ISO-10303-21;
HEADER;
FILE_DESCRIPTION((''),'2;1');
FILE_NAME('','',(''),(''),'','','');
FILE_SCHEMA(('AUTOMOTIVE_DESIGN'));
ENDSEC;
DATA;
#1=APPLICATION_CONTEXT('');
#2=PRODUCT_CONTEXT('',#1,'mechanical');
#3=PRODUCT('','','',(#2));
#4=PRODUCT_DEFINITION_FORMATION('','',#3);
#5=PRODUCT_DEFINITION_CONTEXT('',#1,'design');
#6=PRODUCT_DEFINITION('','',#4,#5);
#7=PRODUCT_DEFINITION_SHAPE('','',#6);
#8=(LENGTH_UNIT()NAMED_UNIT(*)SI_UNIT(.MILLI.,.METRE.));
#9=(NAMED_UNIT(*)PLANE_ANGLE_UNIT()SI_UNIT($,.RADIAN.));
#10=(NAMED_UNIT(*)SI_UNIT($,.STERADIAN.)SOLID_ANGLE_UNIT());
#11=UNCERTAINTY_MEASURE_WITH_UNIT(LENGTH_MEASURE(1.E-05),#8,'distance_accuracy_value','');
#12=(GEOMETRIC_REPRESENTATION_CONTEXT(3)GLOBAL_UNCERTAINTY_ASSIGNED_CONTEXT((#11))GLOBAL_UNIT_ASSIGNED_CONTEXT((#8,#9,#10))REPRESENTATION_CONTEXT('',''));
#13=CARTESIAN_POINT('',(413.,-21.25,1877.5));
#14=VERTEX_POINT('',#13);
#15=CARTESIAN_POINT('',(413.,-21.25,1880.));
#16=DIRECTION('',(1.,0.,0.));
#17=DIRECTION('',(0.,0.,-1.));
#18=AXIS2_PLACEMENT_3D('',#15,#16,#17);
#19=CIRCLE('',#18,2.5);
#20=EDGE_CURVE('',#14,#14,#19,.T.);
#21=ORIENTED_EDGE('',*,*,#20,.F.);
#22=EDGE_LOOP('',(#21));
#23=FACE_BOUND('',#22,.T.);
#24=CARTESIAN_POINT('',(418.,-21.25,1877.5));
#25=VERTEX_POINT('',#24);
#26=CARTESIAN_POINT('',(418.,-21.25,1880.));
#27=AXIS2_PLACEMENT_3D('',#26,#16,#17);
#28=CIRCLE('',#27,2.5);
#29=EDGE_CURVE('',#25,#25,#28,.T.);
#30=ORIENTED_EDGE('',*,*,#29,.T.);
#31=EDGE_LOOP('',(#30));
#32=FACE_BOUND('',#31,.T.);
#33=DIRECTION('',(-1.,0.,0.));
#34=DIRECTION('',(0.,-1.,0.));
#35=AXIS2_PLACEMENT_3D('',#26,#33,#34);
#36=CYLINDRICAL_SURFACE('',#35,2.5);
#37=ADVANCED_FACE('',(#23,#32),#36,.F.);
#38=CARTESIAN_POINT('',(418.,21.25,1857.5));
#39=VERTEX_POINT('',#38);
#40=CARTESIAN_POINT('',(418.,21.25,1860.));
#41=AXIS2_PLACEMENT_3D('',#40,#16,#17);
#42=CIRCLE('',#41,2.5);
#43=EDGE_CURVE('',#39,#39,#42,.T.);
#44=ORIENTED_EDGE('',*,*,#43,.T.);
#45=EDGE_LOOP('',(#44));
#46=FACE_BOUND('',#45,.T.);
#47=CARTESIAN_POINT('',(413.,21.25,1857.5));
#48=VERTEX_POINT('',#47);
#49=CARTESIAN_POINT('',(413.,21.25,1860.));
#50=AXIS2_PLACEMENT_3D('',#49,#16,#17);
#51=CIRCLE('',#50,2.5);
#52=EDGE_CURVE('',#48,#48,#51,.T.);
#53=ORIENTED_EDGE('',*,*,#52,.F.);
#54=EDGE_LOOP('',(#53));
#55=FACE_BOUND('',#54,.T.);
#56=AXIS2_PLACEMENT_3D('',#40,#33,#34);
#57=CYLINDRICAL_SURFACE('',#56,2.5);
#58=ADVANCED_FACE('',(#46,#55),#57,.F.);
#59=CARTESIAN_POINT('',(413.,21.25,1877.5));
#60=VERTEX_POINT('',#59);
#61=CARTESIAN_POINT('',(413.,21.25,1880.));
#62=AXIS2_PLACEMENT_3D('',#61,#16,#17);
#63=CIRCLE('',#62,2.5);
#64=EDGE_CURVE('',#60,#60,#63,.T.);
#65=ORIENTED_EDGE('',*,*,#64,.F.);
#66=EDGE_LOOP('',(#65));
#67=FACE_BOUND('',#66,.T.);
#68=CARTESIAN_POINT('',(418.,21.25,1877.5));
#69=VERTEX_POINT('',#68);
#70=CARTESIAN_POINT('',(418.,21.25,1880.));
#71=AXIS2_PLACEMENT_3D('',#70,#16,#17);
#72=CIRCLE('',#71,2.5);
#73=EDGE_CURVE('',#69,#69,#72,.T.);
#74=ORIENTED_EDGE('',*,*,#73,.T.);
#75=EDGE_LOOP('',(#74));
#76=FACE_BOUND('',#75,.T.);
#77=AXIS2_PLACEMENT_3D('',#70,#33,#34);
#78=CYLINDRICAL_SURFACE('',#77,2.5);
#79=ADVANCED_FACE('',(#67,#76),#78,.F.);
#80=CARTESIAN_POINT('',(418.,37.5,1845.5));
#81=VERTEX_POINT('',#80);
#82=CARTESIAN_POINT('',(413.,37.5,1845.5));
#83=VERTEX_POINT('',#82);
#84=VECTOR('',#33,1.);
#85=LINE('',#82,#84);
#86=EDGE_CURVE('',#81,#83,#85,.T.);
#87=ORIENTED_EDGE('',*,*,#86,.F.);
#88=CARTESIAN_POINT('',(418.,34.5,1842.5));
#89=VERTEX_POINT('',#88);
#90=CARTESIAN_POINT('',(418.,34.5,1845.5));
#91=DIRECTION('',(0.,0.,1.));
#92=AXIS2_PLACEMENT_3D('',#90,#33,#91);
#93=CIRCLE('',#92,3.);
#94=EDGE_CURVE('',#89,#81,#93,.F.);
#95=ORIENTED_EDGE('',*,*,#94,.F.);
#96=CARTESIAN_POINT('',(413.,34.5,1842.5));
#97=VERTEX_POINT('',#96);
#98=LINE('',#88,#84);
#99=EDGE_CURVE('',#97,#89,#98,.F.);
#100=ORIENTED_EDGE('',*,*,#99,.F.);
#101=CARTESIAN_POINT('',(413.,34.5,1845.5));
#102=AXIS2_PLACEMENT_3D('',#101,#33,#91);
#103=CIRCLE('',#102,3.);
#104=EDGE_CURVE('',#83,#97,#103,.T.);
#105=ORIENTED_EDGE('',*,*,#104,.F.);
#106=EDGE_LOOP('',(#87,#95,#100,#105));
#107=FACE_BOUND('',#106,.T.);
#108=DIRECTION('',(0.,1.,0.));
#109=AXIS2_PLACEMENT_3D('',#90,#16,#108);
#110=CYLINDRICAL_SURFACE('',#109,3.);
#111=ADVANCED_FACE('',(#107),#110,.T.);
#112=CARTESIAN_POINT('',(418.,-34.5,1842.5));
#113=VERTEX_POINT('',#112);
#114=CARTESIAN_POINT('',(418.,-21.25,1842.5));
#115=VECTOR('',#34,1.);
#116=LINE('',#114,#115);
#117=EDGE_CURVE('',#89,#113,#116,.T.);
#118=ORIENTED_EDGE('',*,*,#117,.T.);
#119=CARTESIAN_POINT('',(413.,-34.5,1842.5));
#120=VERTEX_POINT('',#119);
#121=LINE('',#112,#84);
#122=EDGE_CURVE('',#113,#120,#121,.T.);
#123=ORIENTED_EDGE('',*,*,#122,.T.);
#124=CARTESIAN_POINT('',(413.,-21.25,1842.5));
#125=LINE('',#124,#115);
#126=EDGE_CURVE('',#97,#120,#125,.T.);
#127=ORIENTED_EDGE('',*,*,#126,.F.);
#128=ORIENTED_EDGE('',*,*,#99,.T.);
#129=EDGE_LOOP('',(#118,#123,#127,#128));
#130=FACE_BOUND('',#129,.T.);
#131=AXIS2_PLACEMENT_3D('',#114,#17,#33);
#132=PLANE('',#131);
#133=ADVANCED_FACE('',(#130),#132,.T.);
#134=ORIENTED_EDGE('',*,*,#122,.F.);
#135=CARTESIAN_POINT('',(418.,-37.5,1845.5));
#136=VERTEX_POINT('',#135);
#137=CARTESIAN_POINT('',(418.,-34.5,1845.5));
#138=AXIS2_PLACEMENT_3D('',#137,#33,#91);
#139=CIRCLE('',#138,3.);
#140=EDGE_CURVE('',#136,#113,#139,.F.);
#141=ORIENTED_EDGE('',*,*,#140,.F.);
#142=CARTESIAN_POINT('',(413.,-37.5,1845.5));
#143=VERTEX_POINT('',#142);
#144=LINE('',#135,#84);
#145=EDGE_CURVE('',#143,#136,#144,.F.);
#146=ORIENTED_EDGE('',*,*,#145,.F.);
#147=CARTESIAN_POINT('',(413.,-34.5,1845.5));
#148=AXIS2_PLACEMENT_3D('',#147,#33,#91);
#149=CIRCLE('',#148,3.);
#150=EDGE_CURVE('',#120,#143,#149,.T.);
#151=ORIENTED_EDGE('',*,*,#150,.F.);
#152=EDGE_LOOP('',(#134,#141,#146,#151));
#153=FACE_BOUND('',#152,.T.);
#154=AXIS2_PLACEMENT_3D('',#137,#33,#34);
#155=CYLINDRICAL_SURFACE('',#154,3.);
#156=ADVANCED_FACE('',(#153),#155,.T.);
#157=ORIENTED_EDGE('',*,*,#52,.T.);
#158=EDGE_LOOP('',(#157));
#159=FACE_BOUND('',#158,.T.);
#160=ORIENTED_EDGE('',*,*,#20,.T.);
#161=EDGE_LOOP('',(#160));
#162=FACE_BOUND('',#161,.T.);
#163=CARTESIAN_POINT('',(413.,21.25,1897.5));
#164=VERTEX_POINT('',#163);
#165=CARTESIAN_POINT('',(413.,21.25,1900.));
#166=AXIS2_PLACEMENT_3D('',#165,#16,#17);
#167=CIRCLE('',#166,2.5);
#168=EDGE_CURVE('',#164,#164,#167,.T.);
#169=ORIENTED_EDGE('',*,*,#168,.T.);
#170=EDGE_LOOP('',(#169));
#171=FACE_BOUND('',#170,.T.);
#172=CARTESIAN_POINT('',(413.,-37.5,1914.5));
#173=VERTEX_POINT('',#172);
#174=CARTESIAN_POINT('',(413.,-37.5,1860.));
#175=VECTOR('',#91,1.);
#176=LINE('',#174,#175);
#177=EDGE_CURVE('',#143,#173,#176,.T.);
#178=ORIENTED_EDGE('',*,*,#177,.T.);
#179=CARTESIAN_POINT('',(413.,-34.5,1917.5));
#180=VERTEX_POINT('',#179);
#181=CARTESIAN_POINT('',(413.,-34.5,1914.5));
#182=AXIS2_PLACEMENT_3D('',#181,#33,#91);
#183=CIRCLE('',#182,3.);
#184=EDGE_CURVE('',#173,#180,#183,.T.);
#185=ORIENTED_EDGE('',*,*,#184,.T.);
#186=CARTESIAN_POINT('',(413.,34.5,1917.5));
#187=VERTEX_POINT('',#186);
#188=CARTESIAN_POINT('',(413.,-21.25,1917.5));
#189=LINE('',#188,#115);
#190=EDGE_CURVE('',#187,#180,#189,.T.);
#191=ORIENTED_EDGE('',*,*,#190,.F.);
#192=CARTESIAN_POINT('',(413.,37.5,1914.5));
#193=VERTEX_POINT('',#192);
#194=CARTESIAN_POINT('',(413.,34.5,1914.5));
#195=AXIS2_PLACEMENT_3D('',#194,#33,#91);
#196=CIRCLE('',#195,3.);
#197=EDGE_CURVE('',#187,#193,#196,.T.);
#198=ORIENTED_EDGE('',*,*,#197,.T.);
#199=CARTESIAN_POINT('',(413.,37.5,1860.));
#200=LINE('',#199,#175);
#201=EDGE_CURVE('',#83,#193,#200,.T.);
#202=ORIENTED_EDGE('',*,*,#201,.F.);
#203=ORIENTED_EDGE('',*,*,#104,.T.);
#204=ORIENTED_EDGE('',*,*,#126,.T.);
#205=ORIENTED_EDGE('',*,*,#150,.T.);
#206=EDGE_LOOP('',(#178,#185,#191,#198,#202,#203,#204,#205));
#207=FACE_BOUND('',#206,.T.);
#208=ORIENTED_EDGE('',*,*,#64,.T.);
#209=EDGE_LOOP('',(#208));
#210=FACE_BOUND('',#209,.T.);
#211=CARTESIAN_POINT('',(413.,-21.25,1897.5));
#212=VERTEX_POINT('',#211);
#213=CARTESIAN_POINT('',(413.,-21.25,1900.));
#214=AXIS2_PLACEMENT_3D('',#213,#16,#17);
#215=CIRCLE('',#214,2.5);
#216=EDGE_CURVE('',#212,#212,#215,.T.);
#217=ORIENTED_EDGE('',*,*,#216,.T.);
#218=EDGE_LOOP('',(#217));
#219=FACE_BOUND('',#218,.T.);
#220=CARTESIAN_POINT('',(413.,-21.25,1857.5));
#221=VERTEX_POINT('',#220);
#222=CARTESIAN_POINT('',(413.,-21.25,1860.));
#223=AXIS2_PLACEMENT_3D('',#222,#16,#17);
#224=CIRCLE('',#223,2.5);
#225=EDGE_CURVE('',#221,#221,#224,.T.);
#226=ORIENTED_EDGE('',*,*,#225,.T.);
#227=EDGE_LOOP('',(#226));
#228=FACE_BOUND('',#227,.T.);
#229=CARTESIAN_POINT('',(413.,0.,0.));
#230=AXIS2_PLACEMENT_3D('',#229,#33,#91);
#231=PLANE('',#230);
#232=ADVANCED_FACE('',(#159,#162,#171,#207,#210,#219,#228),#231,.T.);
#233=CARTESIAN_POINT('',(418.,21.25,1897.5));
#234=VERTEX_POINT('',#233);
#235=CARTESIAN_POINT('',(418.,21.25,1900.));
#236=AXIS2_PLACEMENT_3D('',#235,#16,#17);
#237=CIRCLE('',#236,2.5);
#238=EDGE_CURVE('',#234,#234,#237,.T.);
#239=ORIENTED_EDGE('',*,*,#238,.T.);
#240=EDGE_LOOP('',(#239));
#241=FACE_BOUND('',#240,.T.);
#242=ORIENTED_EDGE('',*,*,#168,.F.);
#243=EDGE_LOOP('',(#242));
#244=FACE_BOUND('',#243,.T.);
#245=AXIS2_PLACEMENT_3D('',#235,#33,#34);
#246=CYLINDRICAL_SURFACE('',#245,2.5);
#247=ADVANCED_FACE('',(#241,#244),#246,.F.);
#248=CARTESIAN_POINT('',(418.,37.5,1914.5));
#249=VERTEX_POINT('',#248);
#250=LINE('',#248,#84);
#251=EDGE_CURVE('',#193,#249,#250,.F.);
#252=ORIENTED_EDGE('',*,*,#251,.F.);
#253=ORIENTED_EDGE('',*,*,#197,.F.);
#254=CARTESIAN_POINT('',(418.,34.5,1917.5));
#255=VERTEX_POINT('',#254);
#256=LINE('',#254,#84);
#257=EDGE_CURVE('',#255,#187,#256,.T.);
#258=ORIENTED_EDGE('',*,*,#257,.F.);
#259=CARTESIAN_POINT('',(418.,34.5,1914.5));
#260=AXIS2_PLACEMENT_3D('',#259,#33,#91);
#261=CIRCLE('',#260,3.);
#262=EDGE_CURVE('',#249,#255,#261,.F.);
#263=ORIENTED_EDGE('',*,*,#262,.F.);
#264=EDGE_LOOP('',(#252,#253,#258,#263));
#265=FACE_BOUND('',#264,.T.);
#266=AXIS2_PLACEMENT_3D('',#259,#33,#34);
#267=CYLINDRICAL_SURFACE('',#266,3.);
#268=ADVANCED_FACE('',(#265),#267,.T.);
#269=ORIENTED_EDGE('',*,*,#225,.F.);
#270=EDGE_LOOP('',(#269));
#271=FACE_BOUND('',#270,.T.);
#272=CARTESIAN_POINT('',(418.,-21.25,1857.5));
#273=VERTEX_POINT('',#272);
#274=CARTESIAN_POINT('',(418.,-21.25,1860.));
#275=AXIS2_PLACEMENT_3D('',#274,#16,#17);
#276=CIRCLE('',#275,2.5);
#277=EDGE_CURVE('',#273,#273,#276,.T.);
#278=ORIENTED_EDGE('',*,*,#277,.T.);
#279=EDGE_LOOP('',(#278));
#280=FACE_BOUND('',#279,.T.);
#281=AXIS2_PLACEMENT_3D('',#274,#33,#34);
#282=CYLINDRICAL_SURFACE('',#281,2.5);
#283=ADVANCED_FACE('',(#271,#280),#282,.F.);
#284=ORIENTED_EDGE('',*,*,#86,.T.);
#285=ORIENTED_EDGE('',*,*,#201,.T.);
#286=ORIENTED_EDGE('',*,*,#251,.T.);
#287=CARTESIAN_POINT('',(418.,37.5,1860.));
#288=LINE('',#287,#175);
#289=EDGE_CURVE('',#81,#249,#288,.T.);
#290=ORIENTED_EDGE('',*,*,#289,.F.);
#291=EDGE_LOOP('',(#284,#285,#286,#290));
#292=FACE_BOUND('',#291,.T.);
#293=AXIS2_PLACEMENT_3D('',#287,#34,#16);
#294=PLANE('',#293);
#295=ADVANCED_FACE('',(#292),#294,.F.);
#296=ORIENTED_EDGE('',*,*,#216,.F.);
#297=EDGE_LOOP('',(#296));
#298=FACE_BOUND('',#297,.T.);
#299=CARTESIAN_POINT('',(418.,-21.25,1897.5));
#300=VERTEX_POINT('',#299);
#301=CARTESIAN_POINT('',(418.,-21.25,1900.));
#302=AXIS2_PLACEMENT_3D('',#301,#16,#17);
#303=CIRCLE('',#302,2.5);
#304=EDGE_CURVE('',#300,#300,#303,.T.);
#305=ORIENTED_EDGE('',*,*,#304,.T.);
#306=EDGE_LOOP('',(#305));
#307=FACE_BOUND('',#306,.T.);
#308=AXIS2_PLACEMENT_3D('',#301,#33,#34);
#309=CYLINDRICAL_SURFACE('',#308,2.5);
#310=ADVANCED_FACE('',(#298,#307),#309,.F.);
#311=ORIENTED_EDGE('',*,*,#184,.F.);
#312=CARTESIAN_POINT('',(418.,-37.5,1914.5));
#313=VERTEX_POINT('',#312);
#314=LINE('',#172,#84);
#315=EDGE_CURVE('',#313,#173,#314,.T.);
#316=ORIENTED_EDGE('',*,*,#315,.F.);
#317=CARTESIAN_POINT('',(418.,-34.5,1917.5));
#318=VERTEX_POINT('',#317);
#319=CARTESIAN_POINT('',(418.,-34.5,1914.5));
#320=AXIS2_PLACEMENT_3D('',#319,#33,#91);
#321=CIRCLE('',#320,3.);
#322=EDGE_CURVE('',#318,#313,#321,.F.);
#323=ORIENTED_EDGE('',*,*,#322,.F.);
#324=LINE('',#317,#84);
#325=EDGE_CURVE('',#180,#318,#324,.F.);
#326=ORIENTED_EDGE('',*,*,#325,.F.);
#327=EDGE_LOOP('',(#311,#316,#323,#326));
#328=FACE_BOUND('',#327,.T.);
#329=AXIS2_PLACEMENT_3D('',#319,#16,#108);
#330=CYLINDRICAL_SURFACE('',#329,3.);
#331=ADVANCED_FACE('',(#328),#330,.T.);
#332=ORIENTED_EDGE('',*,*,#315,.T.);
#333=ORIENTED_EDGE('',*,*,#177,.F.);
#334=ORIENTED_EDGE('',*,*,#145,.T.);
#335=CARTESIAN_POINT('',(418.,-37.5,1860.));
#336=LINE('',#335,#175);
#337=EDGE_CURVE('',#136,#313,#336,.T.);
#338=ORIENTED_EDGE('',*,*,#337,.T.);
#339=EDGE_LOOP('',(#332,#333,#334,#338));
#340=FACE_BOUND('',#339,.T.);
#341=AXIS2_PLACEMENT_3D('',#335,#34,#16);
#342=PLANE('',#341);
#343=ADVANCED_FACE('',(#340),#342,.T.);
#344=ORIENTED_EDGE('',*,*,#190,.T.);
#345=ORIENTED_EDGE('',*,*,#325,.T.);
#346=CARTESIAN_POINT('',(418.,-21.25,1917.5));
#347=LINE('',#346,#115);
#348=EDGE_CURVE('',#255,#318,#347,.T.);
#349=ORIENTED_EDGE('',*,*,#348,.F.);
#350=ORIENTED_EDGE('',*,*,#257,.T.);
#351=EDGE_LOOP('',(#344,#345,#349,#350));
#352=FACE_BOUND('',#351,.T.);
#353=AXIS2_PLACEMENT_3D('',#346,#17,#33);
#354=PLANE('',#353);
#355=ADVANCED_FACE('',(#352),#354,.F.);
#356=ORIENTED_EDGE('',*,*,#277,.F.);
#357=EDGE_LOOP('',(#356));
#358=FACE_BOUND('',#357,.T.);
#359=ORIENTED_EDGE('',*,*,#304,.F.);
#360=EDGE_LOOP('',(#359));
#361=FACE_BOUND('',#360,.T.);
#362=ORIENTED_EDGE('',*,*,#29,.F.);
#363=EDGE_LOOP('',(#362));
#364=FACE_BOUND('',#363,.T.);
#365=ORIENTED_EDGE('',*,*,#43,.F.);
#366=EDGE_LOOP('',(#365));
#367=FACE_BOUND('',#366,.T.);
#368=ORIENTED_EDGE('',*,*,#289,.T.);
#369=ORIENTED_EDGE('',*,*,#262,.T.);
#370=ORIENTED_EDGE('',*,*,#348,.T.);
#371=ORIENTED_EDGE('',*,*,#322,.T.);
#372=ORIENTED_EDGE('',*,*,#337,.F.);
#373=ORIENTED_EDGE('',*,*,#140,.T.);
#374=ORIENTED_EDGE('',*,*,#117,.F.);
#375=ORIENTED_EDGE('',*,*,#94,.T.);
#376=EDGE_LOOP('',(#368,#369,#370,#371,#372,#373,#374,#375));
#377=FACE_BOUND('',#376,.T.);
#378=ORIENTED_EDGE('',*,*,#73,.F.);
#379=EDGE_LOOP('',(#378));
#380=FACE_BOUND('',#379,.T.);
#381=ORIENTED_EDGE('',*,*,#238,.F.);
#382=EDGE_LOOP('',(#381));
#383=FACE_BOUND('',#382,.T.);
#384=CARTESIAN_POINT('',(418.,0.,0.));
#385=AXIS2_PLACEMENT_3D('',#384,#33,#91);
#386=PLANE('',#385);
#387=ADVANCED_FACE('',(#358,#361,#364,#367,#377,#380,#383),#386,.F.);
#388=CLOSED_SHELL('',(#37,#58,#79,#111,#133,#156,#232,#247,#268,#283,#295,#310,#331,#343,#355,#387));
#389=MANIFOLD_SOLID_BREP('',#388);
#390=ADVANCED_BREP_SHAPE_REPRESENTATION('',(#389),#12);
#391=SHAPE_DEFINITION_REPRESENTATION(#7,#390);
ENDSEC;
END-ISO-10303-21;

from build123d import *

# Parameters (mm, degrees)
STOCK_MASTER_SKETCH_002_1_START     = 413
STOCK_MASTER_SKETCH_002_1_OUTLINE_W = 75
STOCK_MASTER_SKETCH_002_1_OUTLINE_H = 75
STOCK_MASTER_SKETCH_002_1_OUTLINE_R = 2.5
STOCK_MASTER_SKETCH_002_1_DEPTH     = 5
FILLET1_R                           = 3


# Read off the part's stored shape, not the designer's step: Stock-master_sketch_002-1
with BuildPart() as part:
    # Stock-master_sketch_002-1 outline → Stock-master_sketch_002-1 (new body)
    with BuildSketch(Plane.YZ.offset(STOCK_MASTER_SKETCH_002_1_START)):
        with Locations((0, 1880)):
            Rectangle(STOCK_MASTER_SKETCH_002_1_OUTLINE_W, STOCK_MASTER_SKETCH_002_1_OUTLINE_H)
        with Locations((-21.25, 1860)):
            Circle(STOCK_MASTER_SKETCH_002_1_OUTLINE_R, mode=Mode.SUBTRACT)
        with Locations((21.25, 1860)):
            Circle(STOCK_MASTER_SKETCH_002_1_OUTLINE_R, mode=Mode.SUBTRACT)
        with Locations((-21.25, 1880)):
            Circle(STOCK_MASTER_SKETCH_002_1_OUTLINE_R, mode=Mode.SUBTRACT)
        with Locations((-21.25, 1900)):
            Circle(STOCK_MASTER_SKETCH_002_1_OUTLINE_R, mode=Mode.SUBTRACT)
        with Locations((21.25, 1880)):
            Circle(STOCK_MASTER_SKETCH_002_1_OUTLINE_R, mode=Mode.SUBTRACT)
        with Locations((21.25, 1900)):
            Circle(STOCK_MASTER_SKETCH_002_1_OUTLINE_R, mode=Mode.SUBTRACT)
    extrude(amount=STOCK_MASTER_SKETCH_002_1_DEPTH)

    # Fillet1
    fillet1_edges = [part.edges().sort_by_distance(p)[0] for p in [
        (415.5, 37.5, 1917.5),
        (415.5, 37.5, 1842.5),
        (415.5, -37.5, 1842.5),
        (415.5, -37.5, 1917.5),
    ]]
    fillet(fillet1_edges, radius=FILLET1_R)


solid = part.part
